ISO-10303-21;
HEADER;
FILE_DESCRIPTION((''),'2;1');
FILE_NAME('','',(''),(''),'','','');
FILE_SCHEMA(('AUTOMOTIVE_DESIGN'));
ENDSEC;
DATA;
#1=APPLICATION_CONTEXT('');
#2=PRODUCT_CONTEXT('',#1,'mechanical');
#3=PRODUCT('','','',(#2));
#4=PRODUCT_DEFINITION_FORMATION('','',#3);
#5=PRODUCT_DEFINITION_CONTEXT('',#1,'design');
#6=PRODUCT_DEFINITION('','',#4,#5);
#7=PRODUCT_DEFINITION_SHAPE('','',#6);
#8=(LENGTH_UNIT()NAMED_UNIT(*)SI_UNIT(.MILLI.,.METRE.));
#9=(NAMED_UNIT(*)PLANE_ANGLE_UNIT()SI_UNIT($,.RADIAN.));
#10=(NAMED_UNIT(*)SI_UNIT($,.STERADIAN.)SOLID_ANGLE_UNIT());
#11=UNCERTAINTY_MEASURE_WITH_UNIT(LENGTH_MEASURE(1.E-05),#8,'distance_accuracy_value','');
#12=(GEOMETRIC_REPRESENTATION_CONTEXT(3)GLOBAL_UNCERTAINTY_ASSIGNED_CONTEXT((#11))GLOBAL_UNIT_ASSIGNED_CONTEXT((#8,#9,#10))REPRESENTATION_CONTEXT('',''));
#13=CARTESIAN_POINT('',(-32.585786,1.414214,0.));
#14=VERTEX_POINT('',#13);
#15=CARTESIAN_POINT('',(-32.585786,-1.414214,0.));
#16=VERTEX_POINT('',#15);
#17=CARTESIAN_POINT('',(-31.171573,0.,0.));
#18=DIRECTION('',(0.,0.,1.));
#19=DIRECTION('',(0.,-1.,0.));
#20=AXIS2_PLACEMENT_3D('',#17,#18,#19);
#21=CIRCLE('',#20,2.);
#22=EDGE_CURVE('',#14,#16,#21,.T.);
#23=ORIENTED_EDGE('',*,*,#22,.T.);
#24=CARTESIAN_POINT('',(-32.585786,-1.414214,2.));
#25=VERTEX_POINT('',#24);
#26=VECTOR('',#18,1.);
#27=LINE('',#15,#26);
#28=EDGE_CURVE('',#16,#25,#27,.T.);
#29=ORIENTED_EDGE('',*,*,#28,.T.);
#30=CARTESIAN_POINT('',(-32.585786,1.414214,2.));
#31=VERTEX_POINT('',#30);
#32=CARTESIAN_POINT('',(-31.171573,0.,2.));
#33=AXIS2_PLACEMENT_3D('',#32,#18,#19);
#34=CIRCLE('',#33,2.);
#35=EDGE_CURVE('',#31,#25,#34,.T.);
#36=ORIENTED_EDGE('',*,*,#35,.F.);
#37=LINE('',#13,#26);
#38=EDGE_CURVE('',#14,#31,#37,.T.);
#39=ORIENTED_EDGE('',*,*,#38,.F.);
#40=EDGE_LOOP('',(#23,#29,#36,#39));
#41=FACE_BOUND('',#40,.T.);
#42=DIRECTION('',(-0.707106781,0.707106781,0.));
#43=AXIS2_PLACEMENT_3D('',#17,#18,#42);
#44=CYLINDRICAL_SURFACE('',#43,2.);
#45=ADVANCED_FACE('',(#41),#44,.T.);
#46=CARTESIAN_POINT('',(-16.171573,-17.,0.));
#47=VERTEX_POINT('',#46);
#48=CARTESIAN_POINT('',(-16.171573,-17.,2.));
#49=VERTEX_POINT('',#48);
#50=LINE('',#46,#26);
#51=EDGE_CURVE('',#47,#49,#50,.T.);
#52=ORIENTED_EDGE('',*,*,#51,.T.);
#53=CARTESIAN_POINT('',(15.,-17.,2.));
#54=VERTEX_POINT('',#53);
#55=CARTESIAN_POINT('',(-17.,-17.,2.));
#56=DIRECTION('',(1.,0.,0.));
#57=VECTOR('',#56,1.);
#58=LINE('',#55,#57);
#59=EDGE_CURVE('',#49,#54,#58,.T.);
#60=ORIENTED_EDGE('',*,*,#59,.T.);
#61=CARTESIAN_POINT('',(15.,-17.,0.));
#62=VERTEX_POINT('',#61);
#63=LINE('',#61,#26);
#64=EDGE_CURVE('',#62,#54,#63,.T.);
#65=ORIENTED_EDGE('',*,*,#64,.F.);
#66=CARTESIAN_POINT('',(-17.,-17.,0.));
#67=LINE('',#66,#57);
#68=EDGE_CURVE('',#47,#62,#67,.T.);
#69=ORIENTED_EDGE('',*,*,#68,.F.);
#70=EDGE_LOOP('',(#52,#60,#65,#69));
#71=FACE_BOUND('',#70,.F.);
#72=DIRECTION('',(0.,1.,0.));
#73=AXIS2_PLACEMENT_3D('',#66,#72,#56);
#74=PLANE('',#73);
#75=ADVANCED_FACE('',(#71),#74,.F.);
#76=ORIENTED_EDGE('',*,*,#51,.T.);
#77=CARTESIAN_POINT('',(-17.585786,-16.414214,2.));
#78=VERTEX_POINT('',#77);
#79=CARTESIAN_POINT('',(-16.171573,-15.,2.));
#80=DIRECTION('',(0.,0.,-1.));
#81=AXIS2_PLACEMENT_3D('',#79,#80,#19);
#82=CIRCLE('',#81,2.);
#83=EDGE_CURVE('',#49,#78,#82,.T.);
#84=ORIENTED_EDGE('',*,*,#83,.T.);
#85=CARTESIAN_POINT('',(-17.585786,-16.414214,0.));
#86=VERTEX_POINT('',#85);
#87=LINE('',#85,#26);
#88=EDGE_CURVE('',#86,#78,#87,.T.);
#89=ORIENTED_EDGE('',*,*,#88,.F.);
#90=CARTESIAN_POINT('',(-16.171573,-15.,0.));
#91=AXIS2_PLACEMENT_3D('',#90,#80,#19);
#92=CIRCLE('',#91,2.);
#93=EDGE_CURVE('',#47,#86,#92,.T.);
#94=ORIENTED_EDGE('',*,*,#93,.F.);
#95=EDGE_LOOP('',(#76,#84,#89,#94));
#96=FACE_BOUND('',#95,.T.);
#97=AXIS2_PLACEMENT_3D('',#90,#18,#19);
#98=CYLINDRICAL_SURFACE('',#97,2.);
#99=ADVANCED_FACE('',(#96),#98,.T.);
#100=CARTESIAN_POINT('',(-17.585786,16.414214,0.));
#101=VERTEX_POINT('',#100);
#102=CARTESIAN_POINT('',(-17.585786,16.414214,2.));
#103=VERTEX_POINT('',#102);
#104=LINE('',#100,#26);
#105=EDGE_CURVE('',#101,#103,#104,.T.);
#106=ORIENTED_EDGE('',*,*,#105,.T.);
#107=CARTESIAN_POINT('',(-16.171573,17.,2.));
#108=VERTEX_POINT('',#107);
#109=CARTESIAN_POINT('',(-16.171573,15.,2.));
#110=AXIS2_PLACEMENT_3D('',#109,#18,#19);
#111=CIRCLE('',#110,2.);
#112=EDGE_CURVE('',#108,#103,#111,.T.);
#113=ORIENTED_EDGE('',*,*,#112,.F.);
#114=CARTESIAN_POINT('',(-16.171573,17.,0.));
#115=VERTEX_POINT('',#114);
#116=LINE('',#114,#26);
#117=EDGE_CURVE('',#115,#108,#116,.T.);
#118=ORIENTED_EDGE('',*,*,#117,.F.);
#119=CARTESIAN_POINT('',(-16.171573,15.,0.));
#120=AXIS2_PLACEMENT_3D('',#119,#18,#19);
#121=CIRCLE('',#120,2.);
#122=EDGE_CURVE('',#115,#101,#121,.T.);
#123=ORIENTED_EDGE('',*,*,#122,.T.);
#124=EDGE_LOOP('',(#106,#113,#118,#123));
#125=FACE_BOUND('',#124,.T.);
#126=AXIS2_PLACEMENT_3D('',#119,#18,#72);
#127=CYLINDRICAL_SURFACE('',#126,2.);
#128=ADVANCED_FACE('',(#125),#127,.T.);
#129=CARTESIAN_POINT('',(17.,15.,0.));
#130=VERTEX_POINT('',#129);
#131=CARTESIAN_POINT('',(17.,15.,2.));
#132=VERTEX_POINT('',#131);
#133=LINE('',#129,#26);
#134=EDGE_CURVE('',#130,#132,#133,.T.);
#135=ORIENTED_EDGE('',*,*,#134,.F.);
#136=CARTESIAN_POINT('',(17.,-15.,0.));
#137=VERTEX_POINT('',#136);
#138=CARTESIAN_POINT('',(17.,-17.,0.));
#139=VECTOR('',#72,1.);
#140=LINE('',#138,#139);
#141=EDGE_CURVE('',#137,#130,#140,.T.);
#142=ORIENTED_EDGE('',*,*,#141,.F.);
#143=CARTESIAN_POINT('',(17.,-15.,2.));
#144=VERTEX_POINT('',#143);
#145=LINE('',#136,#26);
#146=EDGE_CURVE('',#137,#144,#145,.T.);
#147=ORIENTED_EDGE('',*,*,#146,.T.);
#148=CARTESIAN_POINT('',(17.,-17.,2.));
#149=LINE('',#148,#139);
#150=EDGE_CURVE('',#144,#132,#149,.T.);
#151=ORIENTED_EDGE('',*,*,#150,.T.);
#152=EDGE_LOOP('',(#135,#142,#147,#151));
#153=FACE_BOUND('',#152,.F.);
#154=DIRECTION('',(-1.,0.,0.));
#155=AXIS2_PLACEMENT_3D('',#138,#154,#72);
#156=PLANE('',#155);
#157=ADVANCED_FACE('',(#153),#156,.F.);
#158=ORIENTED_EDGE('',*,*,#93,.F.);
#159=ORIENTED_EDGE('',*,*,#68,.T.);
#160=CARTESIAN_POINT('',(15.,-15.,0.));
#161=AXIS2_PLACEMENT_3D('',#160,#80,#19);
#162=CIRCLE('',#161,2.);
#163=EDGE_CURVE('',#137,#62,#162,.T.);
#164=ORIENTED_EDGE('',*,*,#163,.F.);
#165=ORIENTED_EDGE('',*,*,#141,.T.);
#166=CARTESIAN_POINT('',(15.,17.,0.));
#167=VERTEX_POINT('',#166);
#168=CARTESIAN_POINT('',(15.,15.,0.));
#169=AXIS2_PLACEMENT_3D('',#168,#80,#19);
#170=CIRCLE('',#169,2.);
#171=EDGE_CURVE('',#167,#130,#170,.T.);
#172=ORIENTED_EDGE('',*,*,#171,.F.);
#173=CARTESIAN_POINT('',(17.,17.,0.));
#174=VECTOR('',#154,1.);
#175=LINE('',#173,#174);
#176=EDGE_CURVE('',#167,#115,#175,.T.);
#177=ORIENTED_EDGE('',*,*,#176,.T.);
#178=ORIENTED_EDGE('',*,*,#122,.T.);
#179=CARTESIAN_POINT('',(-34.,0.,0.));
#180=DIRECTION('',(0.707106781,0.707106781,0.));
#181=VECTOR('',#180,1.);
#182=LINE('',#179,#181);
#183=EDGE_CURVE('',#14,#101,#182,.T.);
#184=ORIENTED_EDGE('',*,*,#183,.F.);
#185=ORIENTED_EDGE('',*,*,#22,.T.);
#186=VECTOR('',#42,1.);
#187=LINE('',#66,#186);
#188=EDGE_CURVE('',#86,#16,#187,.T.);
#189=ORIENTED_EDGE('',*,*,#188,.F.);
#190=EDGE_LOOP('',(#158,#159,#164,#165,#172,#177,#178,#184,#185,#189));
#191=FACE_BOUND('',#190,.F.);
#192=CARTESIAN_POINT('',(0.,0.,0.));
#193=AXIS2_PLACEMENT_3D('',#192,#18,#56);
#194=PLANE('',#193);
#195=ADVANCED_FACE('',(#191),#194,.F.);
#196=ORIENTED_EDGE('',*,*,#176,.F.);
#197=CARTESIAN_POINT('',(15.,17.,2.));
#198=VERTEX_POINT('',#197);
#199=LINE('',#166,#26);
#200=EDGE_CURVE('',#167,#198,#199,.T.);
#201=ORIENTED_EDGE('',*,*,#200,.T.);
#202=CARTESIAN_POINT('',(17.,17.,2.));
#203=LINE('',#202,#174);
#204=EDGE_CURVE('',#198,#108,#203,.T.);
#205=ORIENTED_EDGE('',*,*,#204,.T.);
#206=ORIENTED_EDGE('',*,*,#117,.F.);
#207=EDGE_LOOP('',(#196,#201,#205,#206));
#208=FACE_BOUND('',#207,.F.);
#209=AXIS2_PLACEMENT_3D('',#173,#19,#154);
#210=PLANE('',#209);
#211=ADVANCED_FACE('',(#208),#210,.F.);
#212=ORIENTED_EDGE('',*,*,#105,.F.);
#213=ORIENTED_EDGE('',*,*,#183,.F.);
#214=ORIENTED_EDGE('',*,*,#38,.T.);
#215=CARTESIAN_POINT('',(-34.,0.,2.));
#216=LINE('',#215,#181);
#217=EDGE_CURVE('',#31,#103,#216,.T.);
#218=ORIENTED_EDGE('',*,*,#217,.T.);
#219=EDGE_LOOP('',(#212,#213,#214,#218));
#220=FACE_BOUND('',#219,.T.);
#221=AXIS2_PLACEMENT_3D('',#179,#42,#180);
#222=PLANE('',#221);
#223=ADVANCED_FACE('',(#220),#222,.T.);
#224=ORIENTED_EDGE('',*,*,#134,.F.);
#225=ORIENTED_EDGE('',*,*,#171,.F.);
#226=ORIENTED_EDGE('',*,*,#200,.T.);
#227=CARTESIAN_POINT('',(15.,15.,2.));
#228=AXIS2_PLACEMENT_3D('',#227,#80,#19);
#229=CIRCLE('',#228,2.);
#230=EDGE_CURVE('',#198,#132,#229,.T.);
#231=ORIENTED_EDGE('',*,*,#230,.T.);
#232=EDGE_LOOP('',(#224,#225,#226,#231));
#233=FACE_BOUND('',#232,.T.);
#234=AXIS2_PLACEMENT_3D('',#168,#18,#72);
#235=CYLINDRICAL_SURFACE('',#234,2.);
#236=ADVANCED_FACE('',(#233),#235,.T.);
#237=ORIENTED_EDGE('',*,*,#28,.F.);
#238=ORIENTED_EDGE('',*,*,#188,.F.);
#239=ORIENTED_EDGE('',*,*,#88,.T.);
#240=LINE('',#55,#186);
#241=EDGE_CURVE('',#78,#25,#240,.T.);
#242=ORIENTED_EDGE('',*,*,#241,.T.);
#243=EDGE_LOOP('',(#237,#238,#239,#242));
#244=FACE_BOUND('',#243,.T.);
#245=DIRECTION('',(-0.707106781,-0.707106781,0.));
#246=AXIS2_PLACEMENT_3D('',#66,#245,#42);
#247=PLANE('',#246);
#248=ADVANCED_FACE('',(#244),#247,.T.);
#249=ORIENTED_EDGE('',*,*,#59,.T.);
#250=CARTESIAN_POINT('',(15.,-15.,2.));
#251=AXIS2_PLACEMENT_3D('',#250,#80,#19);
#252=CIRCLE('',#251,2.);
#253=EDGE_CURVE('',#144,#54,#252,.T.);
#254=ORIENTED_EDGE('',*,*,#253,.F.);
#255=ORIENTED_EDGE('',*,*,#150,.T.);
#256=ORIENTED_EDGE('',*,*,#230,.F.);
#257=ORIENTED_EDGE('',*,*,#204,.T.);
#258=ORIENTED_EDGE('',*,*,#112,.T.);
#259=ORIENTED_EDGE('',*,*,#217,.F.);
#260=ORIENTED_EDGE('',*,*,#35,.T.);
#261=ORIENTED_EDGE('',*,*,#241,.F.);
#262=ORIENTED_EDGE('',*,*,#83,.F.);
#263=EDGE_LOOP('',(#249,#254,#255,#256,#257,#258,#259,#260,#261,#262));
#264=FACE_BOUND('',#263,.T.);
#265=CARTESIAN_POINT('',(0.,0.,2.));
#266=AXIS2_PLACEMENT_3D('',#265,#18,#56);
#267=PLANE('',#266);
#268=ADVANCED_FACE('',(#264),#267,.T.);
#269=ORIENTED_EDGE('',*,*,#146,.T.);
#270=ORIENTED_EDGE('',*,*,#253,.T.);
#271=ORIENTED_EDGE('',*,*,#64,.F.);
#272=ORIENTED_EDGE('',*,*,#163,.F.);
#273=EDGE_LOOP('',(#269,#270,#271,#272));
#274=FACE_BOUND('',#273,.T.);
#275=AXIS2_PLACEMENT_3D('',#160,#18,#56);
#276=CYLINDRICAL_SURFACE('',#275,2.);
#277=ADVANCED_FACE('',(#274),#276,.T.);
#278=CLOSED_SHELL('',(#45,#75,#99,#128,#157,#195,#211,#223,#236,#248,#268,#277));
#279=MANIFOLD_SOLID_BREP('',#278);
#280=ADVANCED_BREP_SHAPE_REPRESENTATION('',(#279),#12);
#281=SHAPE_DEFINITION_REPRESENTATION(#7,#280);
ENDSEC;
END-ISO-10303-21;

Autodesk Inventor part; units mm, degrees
ref_plane "YZ Plane" through (0, 0, 0) normal (1, 0, 0) x (0, 1, 0)
ref_plane "XZ Plane" through (0, 0, 0) normal (0, 1, 0) x (-1, 0, 0)
ref_plane "XY Plane" through (0, 0, 0) normal (0, 0, 1) x (1, 0, 0)
sketch "Sketch1" plane through (0, 0, 0) normal (0, 0, 1) x (1, 0, 0)
  line L0 (-17, -17) -> (17, -17)
  line L1 (17, -17) -> (17, 17)
  line L2 (17, 17) -> (-17, 17)
  line L3 (-17, 17) -> (-17, -17)
  line L4 (-17, -17) -> (17, 17) construction
  line L5 (17, -17) -> (-17, 17) construction
  line L6 (-17, -17) -> (-34, 0)
  line L7 (-34, 0) -> (-17, 17)
  point P0 (0, 0)
  point P1 (-17, 0)
  dimension "d154" = 34
  dimension "d155" = 34
  dimension "d180" = 17
extrude "Plate5" add sketch "Sketch1" along normal blind 2
fillet "Corner Round1" radius 2 5 edges at (17, 17, 1) (-17, 17, 1) (-17, -17, 1) (17, -17, 1) (-34, 0, 1)
properties part number "PRS 8666 FDS CUP 1_D940" material "Stainless Steel"
